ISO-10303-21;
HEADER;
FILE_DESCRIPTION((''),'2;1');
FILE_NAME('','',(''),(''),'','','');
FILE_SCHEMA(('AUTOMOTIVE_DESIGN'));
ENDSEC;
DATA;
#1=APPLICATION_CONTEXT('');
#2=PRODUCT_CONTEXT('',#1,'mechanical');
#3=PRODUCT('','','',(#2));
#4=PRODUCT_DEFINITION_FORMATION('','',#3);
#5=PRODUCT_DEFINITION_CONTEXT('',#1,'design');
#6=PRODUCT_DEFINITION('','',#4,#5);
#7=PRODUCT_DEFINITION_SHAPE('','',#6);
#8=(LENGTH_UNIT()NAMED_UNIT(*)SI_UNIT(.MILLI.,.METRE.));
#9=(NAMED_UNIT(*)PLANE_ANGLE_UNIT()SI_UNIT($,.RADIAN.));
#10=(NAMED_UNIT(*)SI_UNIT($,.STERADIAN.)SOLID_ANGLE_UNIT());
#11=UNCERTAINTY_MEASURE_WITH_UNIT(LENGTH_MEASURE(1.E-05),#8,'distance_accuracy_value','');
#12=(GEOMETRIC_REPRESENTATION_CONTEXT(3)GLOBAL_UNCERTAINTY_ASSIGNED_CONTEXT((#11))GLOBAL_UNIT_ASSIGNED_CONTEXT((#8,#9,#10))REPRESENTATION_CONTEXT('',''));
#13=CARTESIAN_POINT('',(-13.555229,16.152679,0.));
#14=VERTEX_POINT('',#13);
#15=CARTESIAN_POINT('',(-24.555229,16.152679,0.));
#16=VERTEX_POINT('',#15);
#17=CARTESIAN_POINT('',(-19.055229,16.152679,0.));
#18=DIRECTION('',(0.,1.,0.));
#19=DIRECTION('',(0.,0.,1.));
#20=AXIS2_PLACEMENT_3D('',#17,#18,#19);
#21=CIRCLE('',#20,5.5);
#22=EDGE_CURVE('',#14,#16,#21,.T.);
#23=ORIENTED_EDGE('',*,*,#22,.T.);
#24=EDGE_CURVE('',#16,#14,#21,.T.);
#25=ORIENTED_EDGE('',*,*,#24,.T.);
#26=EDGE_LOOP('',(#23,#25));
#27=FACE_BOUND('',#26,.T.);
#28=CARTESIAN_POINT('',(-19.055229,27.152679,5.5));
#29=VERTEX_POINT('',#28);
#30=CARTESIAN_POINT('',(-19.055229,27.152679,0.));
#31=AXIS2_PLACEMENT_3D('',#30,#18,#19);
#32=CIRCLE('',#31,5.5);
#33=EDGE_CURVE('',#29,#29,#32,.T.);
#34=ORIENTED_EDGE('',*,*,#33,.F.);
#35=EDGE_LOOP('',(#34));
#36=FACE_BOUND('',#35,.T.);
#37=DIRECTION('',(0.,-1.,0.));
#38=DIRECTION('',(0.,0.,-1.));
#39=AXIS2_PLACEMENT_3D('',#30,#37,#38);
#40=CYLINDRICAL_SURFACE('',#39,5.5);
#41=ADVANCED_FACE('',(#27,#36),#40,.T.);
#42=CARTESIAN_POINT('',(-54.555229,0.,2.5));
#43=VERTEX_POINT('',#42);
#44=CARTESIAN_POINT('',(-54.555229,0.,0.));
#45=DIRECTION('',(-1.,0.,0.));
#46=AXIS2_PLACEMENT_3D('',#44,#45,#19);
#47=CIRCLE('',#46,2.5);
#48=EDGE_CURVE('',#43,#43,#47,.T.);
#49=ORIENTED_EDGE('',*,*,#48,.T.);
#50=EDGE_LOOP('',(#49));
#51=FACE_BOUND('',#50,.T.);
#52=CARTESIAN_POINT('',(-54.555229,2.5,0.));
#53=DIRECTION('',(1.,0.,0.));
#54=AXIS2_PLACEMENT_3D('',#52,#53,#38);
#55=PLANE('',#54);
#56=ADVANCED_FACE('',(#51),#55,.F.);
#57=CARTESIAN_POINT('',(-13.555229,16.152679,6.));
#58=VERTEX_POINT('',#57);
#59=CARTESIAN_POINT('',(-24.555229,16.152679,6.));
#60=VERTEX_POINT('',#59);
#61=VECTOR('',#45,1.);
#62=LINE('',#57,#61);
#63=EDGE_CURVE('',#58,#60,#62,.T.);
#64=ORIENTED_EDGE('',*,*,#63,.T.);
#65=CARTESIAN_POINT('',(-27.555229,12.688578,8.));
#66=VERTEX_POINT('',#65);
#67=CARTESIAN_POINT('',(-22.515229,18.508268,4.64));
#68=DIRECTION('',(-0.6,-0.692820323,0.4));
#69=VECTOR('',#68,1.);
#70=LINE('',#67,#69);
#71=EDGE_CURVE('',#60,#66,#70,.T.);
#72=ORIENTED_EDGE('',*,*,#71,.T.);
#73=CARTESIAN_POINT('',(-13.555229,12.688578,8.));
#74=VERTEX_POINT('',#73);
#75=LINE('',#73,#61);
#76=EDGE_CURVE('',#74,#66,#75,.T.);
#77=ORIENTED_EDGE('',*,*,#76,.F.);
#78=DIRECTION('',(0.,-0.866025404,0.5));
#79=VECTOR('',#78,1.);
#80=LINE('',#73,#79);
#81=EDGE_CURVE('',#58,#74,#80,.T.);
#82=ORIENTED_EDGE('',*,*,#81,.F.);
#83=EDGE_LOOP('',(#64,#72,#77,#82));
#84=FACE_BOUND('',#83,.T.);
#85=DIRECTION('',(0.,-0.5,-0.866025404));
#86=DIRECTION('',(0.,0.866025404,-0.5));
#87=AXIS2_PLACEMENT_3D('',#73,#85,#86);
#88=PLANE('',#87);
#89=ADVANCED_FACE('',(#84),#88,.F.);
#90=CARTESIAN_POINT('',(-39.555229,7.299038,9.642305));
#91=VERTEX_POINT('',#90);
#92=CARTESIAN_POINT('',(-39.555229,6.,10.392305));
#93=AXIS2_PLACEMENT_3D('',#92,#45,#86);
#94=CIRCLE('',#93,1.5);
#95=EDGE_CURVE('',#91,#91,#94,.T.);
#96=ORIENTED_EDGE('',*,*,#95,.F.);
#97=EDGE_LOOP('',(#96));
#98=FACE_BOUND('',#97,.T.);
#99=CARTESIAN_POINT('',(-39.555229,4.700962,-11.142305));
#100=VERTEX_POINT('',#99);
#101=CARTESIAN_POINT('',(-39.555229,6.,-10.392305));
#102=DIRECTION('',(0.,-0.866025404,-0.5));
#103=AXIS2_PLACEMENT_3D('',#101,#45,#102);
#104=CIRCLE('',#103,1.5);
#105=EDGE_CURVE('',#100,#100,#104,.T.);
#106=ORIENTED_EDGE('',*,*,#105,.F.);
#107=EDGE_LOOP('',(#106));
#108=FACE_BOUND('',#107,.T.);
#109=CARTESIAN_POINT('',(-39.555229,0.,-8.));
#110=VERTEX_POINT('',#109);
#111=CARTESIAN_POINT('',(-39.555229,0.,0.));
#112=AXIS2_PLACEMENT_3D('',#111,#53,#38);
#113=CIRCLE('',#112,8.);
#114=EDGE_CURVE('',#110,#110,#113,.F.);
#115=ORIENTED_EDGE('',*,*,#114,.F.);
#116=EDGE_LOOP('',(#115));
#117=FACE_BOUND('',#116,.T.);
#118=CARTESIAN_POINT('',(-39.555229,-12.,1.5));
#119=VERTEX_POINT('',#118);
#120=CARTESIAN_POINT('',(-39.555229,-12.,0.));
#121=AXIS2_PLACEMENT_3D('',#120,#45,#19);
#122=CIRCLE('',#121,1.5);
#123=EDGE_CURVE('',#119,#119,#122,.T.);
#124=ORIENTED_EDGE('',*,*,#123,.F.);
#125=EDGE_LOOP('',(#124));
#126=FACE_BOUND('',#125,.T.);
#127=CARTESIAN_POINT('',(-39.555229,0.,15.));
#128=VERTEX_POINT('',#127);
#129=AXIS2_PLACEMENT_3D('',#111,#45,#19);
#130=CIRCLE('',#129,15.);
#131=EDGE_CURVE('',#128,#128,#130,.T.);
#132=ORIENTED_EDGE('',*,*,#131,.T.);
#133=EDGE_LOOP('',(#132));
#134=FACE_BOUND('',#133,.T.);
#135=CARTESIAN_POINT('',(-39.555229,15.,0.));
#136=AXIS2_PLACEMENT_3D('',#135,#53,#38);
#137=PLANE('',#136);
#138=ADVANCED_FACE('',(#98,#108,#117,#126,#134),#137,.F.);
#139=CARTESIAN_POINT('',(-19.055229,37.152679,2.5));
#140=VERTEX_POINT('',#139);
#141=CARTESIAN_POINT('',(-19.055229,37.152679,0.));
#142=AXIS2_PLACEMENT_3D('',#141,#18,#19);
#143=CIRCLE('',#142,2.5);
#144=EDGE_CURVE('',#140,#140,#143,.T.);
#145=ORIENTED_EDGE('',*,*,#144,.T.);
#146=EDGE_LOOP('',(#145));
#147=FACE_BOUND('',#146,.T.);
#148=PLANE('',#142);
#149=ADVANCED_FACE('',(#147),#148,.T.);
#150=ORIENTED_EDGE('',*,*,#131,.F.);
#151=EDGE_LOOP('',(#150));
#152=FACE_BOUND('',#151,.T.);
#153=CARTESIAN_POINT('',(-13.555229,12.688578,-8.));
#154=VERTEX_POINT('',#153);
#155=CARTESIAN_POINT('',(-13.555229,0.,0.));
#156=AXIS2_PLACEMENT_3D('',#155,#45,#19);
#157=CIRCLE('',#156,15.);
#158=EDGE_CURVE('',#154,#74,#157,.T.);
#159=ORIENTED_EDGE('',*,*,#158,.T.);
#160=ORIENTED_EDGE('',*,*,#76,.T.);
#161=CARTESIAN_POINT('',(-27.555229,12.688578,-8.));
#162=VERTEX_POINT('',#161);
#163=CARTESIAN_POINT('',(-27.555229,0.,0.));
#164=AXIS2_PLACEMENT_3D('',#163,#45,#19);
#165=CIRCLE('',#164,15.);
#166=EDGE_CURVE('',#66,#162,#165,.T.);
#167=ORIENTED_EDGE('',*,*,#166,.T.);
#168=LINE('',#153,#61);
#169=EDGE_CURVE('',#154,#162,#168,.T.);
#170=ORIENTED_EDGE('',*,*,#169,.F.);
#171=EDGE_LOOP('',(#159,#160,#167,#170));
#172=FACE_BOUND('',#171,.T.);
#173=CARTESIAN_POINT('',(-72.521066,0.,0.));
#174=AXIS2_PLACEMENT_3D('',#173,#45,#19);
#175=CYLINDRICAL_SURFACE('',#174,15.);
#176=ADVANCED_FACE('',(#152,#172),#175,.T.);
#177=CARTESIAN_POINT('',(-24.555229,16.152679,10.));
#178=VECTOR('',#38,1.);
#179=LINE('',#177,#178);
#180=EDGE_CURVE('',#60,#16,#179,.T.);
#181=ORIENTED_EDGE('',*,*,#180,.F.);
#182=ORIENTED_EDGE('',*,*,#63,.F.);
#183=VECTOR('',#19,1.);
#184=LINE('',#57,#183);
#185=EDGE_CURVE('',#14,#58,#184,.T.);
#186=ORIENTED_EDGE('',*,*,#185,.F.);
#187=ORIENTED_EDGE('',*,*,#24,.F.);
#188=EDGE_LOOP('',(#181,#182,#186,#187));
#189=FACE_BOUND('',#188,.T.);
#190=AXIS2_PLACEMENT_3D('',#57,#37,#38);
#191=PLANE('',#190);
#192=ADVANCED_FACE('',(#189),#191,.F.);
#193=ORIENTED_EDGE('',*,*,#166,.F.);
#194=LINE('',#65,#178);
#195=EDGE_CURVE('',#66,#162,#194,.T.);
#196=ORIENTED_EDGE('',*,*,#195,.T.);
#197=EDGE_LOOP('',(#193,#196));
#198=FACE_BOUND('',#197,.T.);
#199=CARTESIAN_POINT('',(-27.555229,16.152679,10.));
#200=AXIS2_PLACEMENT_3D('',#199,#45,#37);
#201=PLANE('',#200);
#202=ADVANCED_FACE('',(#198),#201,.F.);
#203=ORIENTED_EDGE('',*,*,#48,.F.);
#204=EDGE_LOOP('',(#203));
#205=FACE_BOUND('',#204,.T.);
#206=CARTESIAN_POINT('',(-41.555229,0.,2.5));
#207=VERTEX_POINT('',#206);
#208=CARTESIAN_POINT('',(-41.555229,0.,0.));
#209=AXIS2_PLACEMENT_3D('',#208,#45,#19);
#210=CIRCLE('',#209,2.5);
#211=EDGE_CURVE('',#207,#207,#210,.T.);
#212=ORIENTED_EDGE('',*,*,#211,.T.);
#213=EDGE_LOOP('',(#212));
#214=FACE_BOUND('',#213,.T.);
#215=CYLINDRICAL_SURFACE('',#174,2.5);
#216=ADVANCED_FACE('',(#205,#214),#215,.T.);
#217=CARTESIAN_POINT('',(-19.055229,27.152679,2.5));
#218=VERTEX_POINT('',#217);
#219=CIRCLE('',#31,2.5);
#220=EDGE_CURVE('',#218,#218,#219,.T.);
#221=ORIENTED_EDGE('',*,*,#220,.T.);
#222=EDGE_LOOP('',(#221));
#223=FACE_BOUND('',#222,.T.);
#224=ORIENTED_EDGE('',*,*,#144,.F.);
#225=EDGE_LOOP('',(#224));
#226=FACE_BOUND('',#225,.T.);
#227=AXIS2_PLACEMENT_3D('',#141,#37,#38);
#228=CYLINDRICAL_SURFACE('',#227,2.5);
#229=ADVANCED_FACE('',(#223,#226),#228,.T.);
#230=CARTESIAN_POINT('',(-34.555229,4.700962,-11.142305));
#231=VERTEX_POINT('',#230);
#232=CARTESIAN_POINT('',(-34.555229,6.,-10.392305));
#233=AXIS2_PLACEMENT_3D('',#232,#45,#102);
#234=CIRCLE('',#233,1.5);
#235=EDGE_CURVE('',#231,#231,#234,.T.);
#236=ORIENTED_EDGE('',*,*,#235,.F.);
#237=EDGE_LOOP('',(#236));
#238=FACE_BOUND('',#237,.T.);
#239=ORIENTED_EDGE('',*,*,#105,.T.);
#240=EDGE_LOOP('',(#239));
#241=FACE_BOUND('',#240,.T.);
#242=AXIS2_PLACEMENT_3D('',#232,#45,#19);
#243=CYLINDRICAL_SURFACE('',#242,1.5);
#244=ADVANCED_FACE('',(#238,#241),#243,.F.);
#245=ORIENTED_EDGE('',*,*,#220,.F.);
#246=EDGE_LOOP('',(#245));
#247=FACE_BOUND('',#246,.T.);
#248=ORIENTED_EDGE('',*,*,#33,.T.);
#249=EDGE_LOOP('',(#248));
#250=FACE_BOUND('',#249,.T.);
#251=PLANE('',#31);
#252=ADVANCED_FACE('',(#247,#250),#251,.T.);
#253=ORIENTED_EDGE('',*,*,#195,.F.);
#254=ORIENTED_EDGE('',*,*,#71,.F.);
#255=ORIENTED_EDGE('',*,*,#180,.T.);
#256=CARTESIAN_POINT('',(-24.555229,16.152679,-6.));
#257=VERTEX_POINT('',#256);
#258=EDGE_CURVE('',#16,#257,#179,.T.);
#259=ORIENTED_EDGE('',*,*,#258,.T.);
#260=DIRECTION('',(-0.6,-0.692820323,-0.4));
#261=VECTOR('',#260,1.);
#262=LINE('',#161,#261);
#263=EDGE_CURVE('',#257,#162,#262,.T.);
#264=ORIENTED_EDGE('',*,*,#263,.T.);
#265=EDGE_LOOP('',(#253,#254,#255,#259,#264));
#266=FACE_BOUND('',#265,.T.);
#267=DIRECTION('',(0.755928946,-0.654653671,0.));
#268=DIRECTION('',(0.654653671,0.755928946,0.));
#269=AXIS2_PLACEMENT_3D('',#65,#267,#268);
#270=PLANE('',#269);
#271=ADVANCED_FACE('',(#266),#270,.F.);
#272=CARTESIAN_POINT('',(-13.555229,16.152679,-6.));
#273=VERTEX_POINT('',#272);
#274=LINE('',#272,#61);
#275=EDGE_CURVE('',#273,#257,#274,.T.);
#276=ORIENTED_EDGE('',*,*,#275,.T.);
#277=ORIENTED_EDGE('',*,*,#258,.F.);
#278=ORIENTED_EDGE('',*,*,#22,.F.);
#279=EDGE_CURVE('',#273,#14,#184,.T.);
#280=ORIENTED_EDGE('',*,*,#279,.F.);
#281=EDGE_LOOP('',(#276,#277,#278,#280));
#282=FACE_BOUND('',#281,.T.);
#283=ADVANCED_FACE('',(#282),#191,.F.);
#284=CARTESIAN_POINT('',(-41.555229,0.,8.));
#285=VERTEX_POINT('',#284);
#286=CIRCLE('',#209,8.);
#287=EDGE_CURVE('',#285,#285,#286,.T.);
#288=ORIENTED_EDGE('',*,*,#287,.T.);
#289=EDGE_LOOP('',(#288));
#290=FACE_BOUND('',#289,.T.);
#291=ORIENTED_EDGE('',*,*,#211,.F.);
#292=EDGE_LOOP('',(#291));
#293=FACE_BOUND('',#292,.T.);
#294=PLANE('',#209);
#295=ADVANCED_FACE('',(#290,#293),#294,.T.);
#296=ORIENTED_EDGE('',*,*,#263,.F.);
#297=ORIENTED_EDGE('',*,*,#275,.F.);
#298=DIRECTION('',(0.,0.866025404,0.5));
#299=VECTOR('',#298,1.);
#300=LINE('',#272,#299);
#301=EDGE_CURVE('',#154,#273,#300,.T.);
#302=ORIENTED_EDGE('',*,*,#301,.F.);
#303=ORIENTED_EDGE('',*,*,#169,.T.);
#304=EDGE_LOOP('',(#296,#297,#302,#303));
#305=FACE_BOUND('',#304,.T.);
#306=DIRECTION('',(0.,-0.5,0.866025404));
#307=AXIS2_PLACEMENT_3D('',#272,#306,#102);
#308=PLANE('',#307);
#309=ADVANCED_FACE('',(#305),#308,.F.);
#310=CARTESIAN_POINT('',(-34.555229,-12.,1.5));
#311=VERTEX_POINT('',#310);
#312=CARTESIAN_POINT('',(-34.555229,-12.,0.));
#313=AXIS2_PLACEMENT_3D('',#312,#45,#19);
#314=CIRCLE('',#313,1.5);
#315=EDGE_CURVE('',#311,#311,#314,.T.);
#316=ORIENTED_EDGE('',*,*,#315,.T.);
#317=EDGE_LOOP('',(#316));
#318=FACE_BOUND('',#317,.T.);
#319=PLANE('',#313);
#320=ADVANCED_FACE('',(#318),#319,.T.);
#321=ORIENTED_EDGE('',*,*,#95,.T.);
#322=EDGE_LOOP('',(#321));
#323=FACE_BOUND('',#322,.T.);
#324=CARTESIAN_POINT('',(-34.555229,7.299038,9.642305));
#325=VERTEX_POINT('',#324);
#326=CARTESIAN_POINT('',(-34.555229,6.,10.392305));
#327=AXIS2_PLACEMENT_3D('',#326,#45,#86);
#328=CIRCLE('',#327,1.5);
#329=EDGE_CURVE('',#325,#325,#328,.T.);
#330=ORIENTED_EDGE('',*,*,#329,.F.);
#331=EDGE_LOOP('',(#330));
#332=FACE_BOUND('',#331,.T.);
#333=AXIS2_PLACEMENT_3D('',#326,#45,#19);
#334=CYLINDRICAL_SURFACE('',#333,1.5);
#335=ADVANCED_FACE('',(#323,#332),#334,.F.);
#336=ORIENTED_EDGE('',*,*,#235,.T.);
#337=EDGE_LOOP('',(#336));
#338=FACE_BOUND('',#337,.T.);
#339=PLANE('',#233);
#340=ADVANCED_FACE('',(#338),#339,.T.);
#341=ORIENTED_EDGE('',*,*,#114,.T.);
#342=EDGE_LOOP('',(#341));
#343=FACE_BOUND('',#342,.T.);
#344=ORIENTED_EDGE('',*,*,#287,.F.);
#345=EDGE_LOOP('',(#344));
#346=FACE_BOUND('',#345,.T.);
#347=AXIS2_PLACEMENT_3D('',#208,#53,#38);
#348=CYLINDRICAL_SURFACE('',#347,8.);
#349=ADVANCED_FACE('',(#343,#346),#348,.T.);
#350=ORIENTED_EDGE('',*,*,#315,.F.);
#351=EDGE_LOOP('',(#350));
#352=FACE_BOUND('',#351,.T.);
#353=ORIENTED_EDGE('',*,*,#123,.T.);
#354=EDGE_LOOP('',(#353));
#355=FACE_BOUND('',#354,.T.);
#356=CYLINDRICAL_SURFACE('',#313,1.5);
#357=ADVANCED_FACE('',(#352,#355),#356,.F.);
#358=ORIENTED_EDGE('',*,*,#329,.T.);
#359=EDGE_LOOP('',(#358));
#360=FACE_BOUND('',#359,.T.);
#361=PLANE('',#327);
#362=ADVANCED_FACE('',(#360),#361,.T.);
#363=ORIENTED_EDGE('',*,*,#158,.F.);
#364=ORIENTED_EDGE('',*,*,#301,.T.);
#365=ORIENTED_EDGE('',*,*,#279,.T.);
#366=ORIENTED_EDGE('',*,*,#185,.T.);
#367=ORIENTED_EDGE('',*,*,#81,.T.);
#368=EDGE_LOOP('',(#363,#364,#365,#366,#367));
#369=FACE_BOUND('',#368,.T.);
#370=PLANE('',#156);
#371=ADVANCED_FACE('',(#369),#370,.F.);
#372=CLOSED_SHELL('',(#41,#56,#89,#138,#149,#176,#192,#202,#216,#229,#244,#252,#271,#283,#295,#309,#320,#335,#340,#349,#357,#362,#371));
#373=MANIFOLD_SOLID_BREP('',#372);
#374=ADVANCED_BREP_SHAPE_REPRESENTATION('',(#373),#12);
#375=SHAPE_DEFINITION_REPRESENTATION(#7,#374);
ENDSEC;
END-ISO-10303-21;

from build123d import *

# Parameters (mm, degrees)
ESQUISSE3_R                  = 1.5
ENL_V_MAT_EXTRU_1_DEPTH      = 5
R_P_TITION_CIRCULAIRE1_COUNT = 3
ESQUISSE4_R                  = 8
BOSS_EXTRU_1_DEPTH           = 2
BOSS_EXTRU_2_DEPTH           = 14
ENL_V_START                  = -8
ENL_V_MAT_EXTRU_2_DEPTH      = 16
ESQUISSE7_R                  = 5.5
BOSS_EXTRU_4_DEPTH           = 11
ESQUISSE8_R                  = 2.5
BOSS_EXTRU_5_DEPTH           = 10


# Read off the part's stored shape, not the designer's step: Enlèv. mat.-Extru.2
with BuildPart() as part:
    # Esquisse1 → Révolution1 (revolve)
    with BuildSketch(Plane.XY, mode=Mode.PRIVATE) as r_volution1_sk:
        Polygon((-13.555229236, 0), (-13.555229236, 15), (-39.555229236, 15), (-39.555229236, 2.5), (-54.555229236, 2.5), (-54.555229236, 0), align=None)
    revolve(r_volution1_sk.sketch.rotate(Axis((-72.521066027, 0, 0), (1, 0, 0)), 90), axis=Axis((-72.521066027, 0, 0), (1, 0, 0)))

    # Esquisse3 → Enlèv. mat.-Extru.1 (cut)
    with BuildSketch(Plane.ZY.offset(39.555229236)):
        with Locations((0, -12)):
            Circle(ESQUISSE3_R)
    enl_v_mat_extru_1 = extrude(amount=-ENL_V_MAT_EXTRU_1_DEPTH, mode=Mode.SUBTRACT)

    # Répétition circulaire1: Enlèv. mat.-Extru.1 ×3 about axis
    r_p_tition_circulaire1_axis = Axis((0, 0, 0), (1, 0, 0))
    for i in range(1, R_P_TITION_CIRCULAIRE1_COUNT):
        add(enl_v_mat_extru_1.rotate(r_p_tition_circulaire1_axis, i * 360 / R_P_TITION_CIRCULAIRE1_COUNT), mode=Mode.SUBTRACT)

    # Esquisse4 → Boss.-Extru.1 (add)
    with BuildSketch(Plane.ZY.offset(39.555229236)):
        with Locations(Location((0, 0, 0), (0, 0, 180))):
            Circle(ESQUISSE4_R)
    extrude(amount=BOSS_EXTRU_1_DEPTH)

    # Esquisse3D1 → Boss.-Extru.2 (add)
    with BuildSketch(Plane(origin=(-13.555229236, 12.68857754, 8), x_dir=(0, 0, -1), z_dir=(1, 0, 0))):
        Polygon((0, 0), (2, 3.464101615), (14, 3.464101615), (16, 0), align=None)
    extrude(amount=-BOSS_EXTRU_2_DEPTH)

    # Enlèv. mat.-Extru.2 outline → Enlèv. mat.-Extru.2 (cut)
    with BuildSketch(Plane.XY.offset(ENL_V_START)):
        Polygon((-27.555229236, 16.152679156), (-27.555229236, 12.68857754), (-24.555229236, 16.152679156), align=None)
    extrude(amount=ENL_V_MAT_EXTRU_2_DEPTH, mode=Mode.SUBTRACT)

    # Esquisse7 → Boss.-Extru.4 (add)
    with BuildSketch(Plane(origin=(0, 16.152679156, 0), x_dir=(1, 0, 0), z_dir=(0, 1, 0))):
        with Locations(Location((-19.055229236, 0, 0), (0, 0, 180))):
            Circle(ESQUISSE7_R)
    extrude(amount=BOSS_EXTRU_4_DEPTH)

    # Esquisse8 → Boss.-Extru.5 (add)
    with BuildSketch(Plane(origin=(0, 27.152679156, 0), x_dir=(1, 0, 0), z_dir=(0, 1, 0))):
        with Locations(Location((-19.055229236, 0, 0), (0, 0, 270))):
            Circle(ESQUISSE8_R)
    extrude(amount=BOSS_EXTRU_5_DEPTH)


solid = part.part
